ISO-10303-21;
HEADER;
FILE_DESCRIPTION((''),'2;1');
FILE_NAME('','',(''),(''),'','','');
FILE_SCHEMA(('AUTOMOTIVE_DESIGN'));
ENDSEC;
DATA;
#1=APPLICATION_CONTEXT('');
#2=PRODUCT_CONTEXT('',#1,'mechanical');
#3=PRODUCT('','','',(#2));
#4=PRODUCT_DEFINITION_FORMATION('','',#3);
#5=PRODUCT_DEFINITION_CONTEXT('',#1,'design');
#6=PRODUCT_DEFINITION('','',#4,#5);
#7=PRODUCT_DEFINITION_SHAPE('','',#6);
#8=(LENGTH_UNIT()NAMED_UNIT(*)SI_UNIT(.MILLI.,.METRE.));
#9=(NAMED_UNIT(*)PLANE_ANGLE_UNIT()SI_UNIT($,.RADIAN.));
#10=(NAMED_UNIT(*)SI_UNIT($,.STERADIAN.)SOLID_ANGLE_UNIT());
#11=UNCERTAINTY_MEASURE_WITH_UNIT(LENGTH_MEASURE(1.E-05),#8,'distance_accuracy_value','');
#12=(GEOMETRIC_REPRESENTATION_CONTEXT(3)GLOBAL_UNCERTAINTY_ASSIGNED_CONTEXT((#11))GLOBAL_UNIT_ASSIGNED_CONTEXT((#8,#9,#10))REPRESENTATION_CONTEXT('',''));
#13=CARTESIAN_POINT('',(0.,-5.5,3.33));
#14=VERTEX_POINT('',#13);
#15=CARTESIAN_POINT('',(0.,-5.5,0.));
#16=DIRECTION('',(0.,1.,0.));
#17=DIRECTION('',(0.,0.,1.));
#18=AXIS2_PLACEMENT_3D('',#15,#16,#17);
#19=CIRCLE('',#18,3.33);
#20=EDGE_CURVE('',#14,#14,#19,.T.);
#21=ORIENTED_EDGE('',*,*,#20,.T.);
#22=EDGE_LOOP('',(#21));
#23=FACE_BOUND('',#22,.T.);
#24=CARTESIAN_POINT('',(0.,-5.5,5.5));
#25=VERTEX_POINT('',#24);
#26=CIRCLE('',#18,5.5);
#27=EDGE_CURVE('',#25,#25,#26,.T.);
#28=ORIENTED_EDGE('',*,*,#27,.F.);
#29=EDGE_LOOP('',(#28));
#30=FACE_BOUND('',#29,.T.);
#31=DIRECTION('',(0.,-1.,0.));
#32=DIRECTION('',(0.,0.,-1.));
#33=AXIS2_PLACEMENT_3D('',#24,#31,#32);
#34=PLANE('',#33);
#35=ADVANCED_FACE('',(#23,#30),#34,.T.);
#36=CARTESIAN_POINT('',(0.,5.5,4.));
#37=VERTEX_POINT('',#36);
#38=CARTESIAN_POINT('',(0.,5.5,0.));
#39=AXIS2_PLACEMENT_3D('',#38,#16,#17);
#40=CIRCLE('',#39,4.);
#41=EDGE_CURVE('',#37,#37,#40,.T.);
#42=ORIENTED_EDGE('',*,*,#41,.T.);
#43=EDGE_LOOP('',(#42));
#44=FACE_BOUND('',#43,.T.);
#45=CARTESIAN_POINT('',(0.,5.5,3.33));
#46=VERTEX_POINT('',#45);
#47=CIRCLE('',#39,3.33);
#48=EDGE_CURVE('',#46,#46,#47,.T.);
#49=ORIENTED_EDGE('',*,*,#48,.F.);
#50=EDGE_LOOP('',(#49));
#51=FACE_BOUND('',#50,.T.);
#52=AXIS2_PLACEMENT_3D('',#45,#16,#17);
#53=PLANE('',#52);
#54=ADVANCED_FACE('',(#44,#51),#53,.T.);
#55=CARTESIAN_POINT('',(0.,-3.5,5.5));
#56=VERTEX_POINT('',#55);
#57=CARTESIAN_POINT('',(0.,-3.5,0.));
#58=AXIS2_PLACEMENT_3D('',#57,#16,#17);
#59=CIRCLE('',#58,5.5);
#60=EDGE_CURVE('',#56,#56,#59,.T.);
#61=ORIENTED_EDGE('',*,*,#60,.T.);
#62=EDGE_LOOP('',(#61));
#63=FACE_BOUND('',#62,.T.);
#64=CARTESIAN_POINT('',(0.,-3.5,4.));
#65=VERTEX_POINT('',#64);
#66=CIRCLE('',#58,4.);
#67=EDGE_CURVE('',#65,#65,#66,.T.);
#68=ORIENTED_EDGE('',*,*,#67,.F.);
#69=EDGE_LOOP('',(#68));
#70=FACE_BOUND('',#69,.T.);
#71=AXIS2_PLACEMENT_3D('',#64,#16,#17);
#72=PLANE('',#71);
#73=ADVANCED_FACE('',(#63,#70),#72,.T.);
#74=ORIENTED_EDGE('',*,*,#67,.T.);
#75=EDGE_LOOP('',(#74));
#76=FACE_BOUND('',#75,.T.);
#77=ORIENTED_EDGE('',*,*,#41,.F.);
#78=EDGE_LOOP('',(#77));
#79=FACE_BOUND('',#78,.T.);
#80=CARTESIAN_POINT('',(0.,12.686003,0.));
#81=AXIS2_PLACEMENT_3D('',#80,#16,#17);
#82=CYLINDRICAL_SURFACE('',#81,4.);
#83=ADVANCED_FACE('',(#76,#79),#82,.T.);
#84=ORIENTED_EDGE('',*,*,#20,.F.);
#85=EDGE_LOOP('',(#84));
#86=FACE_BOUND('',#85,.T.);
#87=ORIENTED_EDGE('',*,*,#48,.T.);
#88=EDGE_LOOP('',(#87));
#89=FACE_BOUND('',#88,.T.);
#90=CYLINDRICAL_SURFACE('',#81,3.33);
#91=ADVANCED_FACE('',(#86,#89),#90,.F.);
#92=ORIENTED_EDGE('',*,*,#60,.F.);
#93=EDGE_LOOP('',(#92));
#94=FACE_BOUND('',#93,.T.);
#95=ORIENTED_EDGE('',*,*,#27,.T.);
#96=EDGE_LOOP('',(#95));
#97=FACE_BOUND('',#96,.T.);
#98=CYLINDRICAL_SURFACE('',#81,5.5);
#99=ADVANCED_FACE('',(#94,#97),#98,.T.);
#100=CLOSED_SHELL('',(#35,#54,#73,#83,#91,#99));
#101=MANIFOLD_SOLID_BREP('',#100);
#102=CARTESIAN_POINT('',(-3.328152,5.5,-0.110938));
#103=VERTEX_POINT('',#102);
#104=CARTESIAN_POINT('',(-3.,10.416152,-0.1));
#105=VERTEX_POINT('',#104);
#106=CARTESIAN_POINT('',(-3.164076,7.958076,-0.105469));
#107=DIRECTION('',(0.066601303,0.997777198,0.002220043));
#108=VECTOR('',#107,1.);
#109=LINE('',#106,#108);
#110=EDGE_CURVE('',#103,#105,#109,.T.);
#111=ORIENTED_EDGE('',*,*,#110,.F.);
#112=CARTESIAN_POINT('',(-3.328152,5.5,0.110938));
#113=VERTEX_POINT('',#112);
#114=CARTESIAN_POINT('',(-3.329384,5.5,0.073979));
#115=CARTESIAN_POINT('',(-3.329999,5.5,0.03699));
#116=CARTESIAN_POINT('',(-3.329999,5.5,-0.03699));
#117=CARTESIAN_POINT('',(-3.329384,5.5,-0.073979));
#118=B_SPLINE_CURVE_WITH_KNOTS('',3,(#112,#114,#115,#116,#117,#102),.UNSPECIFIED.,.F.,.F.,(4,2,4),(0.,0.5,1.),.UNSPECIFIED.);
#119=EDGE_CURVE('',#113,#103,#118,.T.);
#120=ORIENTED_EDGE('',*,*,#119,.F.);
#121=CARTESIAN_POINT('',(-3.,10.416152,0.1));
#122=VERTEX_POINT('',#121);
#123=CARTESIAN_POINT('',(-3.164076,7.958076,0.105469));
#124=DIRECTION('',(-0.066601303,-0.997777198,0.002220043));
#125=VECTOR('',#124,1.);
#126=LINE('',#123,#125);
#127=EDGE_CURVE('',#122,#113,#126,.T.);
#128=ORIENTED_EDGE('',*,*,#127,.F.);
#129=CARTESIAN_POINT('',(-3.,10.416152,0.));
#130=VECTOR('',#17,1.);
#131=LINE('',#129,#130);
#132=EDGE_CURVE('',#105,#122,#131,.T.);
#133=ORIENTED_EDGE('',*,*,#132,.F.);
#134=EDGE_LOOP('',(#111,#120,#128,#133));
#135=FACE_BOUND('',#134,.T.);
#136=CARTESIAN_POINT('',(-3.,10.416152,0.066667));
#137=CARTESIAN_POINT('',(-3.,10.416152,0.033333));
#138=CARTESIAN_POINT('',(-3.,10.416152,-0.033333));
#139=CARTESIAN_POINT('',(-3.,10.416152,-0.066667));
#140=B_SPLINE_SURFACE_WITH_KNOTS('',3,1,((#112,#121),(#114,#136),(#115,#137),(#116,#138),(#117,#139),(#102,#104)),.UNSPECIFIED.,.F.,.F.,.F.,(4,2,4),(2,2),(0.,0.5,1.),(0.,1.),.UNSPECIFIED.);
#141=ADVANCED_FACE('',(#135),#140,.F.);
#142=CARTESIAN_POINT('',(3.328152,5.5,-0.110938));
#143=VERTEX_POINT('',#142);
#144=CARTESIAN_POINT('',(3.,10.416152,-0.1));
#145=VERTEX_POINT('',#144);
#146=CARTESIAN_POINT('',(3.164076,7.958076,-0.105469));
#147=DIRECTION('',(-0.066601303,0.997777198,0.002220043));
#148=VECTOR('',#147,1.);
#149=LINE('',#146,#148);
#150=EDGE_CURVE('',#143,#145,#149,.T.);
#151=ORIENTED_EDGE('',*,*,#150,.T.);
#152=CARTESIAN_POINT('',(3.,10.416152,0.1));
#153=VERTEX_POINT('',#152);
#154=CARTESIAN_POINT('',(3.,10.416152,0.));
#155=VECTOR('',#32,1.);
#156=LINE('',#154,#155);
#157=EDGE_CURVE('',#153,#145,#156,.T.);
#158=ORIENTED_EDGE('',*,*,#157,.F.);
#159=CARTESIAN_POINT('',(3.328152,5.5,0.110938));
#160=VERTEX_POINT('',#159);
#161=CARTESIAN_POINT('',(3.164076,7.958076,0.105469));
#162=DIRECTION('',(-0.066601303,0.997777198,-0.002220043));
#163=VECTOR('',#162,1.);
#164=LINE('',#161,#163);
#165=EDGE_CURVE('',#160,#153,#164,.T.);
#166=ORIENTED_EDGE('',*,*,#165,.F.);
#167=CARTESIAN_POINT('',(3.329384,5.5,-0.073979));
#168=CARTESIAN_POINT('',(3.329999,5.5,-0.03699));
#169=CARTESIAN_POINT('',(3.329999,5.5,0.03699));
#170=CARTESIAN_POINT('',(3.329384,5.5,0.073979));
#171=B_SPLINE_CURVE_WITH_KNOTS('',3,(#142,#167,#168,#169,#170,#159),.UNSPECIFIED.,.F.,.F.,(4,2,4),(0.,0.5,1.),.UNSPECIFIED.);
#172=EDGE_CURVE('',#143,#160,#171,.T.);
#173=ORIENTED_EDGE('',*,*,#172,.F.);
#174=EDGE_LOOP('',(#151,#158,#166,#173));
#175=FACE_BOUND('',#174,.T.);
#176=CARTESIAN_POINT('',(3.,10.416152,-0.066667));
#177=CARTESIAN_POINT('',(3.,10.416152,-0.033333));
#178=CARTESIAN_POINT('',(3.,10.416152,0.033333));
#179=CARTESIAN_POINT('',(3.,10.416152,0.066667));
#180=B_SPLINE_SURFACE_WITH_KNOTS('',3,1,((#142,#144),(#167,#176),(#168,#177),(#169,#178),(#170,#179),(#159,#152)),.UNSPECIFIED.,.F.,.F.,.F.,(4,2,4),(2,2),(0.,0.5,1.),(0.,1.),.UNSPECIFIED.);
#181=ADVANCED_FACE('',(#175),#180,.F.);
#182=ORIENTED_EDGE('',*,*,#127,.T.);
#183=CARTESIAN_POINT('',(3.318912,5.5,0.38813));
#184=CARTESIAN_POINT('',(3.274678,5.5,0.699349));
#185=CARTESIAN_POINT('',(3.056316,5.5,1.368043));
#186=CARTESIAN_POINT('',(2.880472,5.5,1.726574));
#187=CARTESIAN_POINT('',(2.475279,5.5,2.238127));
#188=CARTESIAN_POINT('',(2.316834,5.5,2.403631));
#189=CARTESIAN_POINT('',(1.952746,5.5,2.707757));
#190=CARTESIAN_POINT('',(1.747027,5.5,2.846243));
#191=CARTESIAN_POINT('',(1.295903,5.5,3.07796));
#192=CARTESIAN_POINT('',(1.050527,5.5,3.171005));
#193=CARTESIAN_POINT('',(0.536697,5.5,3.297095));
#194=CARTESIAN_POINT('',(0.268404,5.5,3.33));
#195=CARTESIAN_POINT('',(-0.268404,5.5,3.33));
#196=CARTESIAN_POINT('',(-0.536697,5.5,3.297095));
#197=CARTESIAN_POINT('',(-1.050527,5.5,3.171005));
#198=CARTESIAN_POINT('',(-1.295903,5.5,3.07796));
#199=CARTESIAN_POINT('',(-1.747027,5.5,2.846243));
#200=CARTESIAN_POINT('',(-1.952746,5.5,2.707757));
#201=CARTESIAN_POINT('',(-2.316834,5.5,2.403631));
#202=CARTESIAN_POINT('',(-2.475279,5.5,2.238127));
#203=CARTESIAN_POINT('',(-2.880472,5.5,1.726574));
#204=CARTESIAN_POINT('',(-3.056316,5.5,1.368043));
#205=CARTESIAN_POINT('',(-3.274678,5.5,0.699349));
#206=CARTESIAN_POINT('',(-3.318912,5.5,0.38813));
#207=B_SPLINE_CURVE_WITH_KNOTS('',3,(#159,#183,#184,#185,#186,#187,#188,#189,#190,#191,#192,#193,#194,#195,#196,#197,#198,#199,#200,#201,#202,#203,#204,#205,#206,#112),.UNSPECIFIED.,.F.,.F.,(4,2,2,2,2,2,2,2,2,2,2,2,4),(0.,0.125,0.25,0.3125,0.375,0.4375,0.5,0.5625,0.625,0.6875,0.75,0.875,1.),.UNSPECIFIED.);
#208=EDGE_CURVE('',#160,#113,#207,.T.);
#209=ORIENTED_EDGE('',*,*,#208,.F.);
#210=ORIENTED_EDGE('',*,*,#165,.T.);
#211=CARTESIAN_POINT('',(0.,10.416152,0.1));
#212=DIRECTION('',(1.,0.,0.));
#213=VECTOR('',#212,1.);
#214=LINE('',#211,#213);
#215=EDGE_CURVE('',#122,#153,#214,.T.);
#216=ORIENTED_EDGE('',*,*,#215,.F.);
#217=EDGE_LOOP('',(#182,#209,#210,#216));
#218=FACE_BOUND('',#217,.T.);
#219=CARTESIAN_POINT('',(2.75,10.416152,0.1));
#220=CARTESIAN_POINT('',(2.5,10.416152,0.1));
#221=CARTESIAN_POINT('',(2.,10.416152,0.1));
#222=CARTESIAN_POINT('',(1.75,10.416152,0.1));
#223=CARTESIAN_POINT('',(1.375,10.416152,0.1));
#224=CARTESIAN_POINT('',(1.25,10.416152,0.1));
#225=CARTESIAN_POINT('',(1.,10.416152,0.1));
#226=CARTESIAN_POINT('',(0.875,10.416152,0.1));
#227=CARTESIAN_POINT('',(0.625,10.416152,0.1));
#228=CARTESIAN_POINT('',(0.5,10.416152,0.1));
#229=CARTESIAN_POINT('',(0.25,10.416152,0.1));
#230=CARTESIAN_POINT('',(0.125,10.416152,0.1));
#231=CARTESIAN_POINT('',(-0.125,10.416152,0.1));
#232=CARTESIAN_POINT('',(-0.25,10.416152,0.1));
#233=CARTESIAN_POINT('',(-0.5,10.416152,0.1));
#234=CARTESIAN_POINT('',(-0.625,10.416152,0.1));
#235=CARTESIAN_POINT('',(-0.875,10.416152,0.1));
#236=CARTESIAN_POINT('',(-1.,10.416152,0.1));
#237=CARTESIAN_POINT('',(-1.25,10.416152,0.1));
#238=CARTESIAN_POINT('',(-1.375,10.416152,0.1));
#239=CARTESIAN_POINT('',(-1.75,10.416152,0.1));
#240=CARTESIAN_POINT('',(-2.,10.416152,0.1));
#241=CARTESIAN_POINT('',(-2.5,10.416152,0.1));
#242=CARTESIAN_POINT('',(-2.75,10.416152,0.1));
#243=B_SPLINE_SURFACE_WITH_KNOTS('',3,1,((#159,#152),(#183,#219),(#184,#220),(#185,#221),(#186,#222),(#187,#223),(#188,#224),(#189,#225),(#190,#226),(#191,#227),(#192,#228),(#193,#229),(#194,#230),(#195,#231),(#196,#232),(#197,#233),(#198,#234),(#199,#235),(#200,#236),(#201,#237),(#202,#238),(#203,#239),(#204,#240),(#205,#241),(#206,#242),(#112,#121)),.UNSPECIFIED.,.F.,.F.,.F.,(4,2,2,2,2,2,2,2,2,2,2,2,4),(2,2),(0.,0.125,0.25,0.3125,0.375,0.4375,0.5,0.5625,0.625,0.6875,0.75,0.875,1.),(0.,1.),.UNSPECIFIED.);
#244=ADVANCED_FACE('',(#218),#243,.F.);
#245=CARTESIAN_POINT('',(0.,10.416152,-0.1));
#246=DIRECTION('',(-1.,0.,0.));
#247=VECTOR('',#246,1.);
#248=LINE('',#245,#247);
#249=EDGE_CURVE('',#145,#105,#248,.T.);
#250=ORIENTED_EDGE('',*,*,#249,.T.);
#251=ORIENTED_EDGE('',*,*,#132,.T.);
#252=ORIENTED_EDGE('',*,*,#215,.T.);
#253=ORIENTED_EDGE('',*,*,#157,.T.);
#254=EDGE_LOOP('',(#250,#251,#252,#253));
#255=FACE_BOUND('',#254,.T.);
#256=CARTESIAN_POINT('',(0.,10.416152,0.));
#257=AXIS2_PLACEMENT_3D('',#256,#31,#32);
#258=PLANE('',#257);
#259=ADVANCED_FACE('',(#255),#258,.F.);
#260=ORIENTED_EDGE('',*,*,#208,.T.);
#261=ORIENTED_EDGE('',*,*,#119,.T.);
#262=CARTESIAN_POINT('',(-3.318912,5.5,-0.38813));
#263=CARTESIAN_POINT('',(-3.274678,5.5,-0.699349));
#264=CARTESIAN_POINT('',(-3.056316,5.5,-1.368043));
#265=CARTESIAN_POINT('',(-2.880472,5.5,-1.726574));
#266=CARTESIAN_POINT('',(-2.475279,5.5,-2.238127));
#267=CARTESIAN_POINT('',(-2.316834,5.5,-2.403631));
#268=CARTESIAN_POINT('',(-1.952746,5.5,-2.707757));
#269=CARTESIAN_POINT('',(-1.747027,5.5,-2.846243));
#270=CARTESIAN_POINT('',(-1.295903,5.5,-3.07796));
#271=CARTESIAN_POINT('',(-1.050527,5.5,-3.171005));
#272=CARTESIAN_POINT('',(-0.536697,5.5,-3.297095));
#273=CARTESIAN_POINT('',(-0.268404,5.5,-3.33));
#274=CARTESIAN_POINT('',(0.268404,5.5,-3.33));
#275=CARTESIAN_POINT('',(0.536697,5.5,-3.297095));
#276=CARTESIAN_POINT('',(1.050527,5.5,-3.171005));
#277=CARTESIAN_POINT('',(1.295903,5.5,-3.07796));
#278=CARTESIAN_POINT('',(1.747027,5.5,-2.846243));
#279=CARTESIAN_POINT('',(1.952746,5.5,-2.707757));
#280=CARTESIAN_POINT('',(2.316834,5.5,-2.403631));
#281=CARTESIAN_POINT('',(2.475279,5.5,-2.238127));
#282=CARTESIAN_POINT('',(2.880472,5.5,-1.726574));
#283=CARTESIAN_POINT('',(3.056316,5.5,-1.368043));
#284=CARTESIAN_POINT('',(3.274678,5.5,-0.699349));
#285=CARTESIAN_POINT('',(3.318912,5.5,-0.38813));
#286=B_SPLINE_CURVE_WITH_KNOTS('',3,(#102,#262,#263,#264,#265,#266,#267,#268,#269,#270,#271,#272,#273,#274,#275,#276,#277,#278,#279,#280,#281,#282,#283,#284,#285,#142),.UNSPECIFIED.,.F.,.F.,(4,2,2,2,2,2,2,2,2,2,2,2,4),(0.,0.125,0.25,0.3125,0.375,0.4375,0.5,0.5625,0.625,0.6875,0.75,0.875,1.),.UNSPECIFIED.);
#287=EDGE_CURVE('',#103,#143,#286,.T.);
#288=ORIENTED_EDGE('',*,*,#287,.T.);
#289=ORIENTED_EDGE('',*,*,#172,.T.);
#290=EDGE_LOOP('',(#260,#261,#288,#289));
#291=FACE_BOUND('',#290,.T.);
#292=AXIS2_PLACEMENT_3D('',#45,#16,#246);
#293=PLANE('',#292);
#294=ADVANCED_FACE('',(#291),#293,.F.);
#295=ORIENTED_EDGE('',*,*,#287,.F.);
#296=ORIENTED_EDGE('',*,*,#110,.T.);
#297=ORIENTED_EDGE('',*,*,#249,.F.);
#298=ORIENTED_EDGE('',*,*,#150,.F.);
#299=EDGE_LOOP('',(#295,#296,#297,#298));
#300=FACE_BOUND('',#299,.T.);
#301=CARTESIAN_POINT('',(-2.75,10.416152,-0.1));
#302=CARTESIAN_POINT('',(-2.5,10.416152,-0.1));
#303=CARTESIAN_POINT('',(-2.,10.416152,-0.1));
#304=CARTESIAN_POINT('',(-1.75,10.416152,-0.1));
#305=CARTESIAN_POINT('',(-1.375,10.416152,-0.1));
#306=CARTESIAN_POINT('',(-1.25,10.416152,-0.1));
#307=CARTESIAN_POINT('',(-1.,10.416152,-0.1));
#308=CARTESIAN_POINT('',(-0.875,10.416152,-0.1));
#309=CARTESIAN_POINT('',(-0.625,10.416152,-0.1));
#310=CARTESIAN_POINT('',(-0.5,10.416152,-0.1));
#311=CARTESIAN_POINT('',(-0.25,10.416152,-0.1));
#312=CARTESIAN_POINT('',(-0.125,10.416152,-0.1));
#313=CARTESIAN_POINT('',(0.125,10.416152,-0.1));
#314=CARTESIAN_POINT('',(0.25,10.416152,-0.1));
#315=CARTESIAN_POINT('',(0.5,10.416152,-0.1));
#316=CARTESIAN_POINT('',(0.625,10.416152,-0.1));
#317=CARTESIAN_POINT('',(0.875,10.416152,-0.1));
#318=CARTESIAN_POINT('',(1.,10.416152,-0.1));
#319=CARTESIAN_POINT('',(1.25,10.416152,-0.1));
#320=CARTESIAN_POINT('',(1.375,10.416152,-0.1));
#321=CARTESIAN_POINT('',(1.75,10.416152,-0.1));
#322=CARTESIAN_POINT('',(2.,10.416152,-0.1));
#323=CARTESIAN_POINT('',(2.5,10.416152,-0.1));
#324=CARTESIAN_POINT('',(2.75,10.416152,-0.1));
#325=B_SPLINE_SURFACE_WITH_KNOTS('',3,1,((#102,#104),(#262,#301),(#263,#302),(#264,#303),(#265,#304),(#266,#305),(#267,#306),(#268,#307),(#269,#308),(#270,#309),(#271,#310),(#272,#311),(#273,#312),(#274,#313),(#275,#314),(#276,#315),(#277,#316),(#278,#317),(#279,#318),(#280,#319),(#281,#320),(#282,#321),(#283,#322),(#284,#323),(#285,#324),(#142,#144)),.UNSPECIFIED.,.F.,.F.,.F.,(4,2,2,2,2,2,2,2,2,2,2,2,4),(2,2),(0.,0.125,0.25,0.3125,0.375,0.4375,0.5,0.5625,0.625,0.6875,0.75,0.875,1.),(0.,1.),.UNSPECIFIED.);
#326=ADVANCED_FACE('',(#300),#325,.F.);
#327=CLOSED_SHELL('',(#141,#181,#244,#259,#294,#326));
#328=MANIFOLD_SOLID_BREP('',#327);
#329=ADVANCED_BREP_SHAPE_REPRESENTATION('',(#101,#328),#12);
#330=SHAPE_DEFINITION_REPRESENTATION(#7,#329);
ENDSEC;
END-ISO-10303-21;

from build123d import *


with BuildPart() as part:
    # Sketch1 → Revolve1 (revolve)
    with BuildSketch(Plane(origin=(0, 0, 0), x_dir=(0, 0, -1), z_dir=(1, 0, 0))):
        Polygon((-4, 5.5), (-4, -3.5), (-5.5, -3.5), (-5.5, -5.5), (-3.33, -5.5), (-3.33, 5.5), align=None)
    revolve(axis=Axis((0, 12.686003097, 0), (0, -1, 0)))


with BuildPart() as body_2:
    # Loft4: read off the stored shape, not the designer's step
    # Loft4: loft between two sections, ruled curve by curve
    loft4_from = [
        Edge.make_bspline([(3.32815154, 5.5, 0.110938385), (3.318911807, 5.5, 0.388130394), (3.274678471, 5.5, 0.699349139), (3.056316005, 5.5, 1.368042684), (2.880471964, 5.5, 1.726573501), (2.475279036, 5.5, 2.238126983), (2.316834304, 5.5, 2.403631028), (1.952745557, 5.5, 2.707757024), (1.747027053, 5.5, 2.846242788), (1.295902616, 5.5, 3.07796003), (1.050526711, 5.5, 3.171005139), (0.536696829, 5.5, 3.297095157), (0.268404124, 5.5, 3.33), (-0.268404124, 5.5, 3.33), (-0.536696829, 5.5, 3.297095157), (-1.050526711, 5.5, 3.171005139), (-1.295902616, 5.5, 3.07796003), (-1.747027053, 5.5, 2.846242788), (-1.952745557, 5.5, 2.707757024), (-2.316834304, 5.5, 2.403631028), (-2.475279036, 5.5, 2.238126983), (-2.880471964, 5.5, 1.726573501), (-3.056316005, 5.5, 1.368042684), (-3.274678471, 5.5, 0.699349139), (-3.318911807, 5.5, 0.388130394), (-3.32815154, 5.5, 0.110938385)], [0, 0, 0, 0, 0.125, 0.125, 0.25, 0.25, 0.3125, 0.3125, 0.375, 0.375, 0.4375, 0.4375, 0.5, 0.5, 0.5625, 0.5625, 0.625, 0.625, 0.6875, 0.6875, 0.75, 0.75, 0.875, 0.875, 1, 1, 1, 1], 3),
        Edge.make_bspline([(3.32815154, 5.5, -0.110938385), (3.329383505, 5.5, -0.07397945), (3.329999487, 5.5, -0.036989725), (3.329999487, 5.5, 0.036989725), (3.329383505, 5.5, 0.07397945), (3.32815154, 5.5, 0.110938385)], [0, 0, 0, 0, 0.5, 0.5, 1, 1, 1, 1], 3),
        Edge.make_bspline([(-3.32815154, 5.5, -0.110938385), (-3.318911807, 5.5, -0.388130394), (-3.274678471, 5.5, -0.699349139), (-3.056316005, 5.5, -1.368042684), (-2.880471964, 5.5, -1.726573501), (-2.475279036, 5.5, -2.238126983), (-2.316834304, 5.5, -2.403631028), (-1.952745557, 5.5, -2.707757024), (-1.747027053, 5.5, -2.846242788), (-1.295902616, 5.5, -3.07796003), (-1.050526711, 5.5, -3.171005139), (-0.536696829, 5.5, -3.297095157), (-0.268404124, 5.5, -3.33), (0.268404124, 5.5, -3.33), (0.536696829, 5.5, -3.297095157), (1.050526711, 5.5, -3.171005139), (1.295902616, 5.5, -3.07796003), (1.747027053, 5.5, -2.846242788), (1.952745557, 5.5, -2.707757024), (2.316834304, 5.5, -2.403631028), (2.475279036, 5.5, -2.238126983), (2.880471964, 5.5, -1.726573501), (3.056316005, 5.5, -1.368042684), (3.274678471, 5.5, -0.699349139), (3.318911807, 5.5, -0.388130394), (3.32815154, 5.5, -0.110938385)], [0, 0, 0, 0, 0.125, 0.125, 0.25, 0.25, 0.3125, 0.3125, 0.375, 0.375, 0.4375, 0.4375, 0.5, 0.5, 0.5625, 0.5625, 0.625, 0.625, 0.6875, 0.6875, 0.75, 0.75, 0.875, 0.875, 1, 1, 1, 1], 3),
        Edge.make_bspline([(-3.32815154, 5.5, 0.110938385), (-3.329383505, 5.5, 0.07397945), (-3.329999487, 5.5, 0.036989725), (-3.329999487, 5.5, -0.036989725), (-3.329383505, 5.5, -0.07397945), (-3.32815154, 5.5, -0.110938385)], [0, 0, 0, 0, 0.5, 0.5, 1, 1, 1, 1], 3),
    ]
    loft4_to = [
        Edge.make_bspline([(3, 10.416151902, 0.1), (2.75, 10.416151902, 0.1), (2.5, 10.416151902, 0.1), (2, 10.416151902, 0.1), (1.75, 10.416151902, 0.1), (1.375, 10.416151902, 0.1), (1.25, 10.416151902, 0.1), (1, 10.416151902, 0.1), (0.875, 10.416151902, 0.1), (0.625, 10.416151902, 0.1), (0.5, 10.416151902, 0.1), (0.25, 10.416151902, 0.1), (0.125, 10.416151902, 0.1), (-0.125, 10.416151902, 0.1), (-0.25, 10.416151902, 0.1), (-0.5, 10.416151902, 0.1), (-0.625, 10.416151902, 0.1), (-0.875, 10.416151902, 0.1), (-1, 10.416151902, 0.1), (-1.25, 10.416151902, 0.1), (-1.375, 10.416151902, 0.1), (-1.75, 10.416151902, 0.1), (-2, 10.416151902, 0.1), (-2.5, 10.416151902, 0.1), (-2.75, 10.416151902, 0.1), (-3, 10.416151902, 0.1)], [0, 0, 0, 0, 0.125, 0.125, 0.25, 0.25, 0.3125, 0.3125, 0.375, 0.375, 0.4375, 0.4375, 0.5, 0.5, 0.5625, 0.5625, 0.625, 0.625, 0.6875, 0.6875, 0.75, 0.75, 0.875, 0.875, 1, 1, 1, 1], 3),
        Edge.make_bspline([(3, 10.416151902, -0.1), (3, 10.416151902, -0.066666667), (3, 10.416151902, -0.033333333), (3, 10.416151902, 0.033333333), (3, 10.416151902, 0.066666667), (3, 10.416151902, 0.1)], [0, 0, 0, 0, 0.5, 0.5, 1, 1, 1, 1], 3),
        Edge.make_bspline([(-3, 10.416151902, -0.1), (-2.75, 10.416151902, -0.1), (-2.5, 10.416151902, -0.1), (-2, 10.416151902, -0.1), (-1.75, 10.416151902, -0.1), (-1.375, 10.416151902, -0.1), (-1.25, 10.416151902, -0.1), (-1, 10.416151902, -0.1), (-0.875, 10.416151902, -0.1), (-0.625, 10.416151902, -0.1), (-0.5, 10.416151902, -0.1), (-0.25, 10.416151902, -0.1), (-0.125, 10.416151902, -0.1), (0.125, 10.416151902, -0.1), (0.25, 10.416151902, -0.1), (0.5, 10.416151902, -0.1), (0.625, 10.416151902, -0.1), (0.875, 10.416151902, -0.1), (1, 10.416151902, -0.1), (1.25, 10.416151902, -0.1), (1.375, 10.416151902, -0.1), (1.75, 10.416151902, -0.1), (2, 10.416151902, -0.1), (2.5, 10.416151902, -0.1), (2.75, 10.416151902, -0.1), (3, 10.416151902, -0.1)], [0, 0, 0, 0, 0.125, 0.125, 0.25, 0.25, 0.3125, 0.3125, 0.375, 0.375, 0.4375, 0.4375, 0.5, 0.5, 0.5625, 0.5625, 0.625, 0.625, 0.6875, 0.6875, 0.75, 0.75, 0.875, 0.875, 1, 1, 1, 1], 3),
        Edge.make_bspline([(-3, 10.416151902, 0.1), (-3, 10.416151902, 0.066666667), (-3, 10.416151902, 0.033333333), (-3, 10.416151902, -0.033333333), (-3, 10.416151902, -0.066666667), (-3, 10.416151902, -0.1)], [0, 0, 0, 0, 0.5, 0.5, 1, 1, 1, 1], 3),
    ]
    loft4 = Solid(Shell([*[Face.make_surface_from_curves(loft4_from[k], loft4_to[k]) for k in range(4)], Face(Wire(loft4_from)), Face(Wire(loft4_to))]))
    add(loft4)


solid = Compound([part.part, body_2.part])
